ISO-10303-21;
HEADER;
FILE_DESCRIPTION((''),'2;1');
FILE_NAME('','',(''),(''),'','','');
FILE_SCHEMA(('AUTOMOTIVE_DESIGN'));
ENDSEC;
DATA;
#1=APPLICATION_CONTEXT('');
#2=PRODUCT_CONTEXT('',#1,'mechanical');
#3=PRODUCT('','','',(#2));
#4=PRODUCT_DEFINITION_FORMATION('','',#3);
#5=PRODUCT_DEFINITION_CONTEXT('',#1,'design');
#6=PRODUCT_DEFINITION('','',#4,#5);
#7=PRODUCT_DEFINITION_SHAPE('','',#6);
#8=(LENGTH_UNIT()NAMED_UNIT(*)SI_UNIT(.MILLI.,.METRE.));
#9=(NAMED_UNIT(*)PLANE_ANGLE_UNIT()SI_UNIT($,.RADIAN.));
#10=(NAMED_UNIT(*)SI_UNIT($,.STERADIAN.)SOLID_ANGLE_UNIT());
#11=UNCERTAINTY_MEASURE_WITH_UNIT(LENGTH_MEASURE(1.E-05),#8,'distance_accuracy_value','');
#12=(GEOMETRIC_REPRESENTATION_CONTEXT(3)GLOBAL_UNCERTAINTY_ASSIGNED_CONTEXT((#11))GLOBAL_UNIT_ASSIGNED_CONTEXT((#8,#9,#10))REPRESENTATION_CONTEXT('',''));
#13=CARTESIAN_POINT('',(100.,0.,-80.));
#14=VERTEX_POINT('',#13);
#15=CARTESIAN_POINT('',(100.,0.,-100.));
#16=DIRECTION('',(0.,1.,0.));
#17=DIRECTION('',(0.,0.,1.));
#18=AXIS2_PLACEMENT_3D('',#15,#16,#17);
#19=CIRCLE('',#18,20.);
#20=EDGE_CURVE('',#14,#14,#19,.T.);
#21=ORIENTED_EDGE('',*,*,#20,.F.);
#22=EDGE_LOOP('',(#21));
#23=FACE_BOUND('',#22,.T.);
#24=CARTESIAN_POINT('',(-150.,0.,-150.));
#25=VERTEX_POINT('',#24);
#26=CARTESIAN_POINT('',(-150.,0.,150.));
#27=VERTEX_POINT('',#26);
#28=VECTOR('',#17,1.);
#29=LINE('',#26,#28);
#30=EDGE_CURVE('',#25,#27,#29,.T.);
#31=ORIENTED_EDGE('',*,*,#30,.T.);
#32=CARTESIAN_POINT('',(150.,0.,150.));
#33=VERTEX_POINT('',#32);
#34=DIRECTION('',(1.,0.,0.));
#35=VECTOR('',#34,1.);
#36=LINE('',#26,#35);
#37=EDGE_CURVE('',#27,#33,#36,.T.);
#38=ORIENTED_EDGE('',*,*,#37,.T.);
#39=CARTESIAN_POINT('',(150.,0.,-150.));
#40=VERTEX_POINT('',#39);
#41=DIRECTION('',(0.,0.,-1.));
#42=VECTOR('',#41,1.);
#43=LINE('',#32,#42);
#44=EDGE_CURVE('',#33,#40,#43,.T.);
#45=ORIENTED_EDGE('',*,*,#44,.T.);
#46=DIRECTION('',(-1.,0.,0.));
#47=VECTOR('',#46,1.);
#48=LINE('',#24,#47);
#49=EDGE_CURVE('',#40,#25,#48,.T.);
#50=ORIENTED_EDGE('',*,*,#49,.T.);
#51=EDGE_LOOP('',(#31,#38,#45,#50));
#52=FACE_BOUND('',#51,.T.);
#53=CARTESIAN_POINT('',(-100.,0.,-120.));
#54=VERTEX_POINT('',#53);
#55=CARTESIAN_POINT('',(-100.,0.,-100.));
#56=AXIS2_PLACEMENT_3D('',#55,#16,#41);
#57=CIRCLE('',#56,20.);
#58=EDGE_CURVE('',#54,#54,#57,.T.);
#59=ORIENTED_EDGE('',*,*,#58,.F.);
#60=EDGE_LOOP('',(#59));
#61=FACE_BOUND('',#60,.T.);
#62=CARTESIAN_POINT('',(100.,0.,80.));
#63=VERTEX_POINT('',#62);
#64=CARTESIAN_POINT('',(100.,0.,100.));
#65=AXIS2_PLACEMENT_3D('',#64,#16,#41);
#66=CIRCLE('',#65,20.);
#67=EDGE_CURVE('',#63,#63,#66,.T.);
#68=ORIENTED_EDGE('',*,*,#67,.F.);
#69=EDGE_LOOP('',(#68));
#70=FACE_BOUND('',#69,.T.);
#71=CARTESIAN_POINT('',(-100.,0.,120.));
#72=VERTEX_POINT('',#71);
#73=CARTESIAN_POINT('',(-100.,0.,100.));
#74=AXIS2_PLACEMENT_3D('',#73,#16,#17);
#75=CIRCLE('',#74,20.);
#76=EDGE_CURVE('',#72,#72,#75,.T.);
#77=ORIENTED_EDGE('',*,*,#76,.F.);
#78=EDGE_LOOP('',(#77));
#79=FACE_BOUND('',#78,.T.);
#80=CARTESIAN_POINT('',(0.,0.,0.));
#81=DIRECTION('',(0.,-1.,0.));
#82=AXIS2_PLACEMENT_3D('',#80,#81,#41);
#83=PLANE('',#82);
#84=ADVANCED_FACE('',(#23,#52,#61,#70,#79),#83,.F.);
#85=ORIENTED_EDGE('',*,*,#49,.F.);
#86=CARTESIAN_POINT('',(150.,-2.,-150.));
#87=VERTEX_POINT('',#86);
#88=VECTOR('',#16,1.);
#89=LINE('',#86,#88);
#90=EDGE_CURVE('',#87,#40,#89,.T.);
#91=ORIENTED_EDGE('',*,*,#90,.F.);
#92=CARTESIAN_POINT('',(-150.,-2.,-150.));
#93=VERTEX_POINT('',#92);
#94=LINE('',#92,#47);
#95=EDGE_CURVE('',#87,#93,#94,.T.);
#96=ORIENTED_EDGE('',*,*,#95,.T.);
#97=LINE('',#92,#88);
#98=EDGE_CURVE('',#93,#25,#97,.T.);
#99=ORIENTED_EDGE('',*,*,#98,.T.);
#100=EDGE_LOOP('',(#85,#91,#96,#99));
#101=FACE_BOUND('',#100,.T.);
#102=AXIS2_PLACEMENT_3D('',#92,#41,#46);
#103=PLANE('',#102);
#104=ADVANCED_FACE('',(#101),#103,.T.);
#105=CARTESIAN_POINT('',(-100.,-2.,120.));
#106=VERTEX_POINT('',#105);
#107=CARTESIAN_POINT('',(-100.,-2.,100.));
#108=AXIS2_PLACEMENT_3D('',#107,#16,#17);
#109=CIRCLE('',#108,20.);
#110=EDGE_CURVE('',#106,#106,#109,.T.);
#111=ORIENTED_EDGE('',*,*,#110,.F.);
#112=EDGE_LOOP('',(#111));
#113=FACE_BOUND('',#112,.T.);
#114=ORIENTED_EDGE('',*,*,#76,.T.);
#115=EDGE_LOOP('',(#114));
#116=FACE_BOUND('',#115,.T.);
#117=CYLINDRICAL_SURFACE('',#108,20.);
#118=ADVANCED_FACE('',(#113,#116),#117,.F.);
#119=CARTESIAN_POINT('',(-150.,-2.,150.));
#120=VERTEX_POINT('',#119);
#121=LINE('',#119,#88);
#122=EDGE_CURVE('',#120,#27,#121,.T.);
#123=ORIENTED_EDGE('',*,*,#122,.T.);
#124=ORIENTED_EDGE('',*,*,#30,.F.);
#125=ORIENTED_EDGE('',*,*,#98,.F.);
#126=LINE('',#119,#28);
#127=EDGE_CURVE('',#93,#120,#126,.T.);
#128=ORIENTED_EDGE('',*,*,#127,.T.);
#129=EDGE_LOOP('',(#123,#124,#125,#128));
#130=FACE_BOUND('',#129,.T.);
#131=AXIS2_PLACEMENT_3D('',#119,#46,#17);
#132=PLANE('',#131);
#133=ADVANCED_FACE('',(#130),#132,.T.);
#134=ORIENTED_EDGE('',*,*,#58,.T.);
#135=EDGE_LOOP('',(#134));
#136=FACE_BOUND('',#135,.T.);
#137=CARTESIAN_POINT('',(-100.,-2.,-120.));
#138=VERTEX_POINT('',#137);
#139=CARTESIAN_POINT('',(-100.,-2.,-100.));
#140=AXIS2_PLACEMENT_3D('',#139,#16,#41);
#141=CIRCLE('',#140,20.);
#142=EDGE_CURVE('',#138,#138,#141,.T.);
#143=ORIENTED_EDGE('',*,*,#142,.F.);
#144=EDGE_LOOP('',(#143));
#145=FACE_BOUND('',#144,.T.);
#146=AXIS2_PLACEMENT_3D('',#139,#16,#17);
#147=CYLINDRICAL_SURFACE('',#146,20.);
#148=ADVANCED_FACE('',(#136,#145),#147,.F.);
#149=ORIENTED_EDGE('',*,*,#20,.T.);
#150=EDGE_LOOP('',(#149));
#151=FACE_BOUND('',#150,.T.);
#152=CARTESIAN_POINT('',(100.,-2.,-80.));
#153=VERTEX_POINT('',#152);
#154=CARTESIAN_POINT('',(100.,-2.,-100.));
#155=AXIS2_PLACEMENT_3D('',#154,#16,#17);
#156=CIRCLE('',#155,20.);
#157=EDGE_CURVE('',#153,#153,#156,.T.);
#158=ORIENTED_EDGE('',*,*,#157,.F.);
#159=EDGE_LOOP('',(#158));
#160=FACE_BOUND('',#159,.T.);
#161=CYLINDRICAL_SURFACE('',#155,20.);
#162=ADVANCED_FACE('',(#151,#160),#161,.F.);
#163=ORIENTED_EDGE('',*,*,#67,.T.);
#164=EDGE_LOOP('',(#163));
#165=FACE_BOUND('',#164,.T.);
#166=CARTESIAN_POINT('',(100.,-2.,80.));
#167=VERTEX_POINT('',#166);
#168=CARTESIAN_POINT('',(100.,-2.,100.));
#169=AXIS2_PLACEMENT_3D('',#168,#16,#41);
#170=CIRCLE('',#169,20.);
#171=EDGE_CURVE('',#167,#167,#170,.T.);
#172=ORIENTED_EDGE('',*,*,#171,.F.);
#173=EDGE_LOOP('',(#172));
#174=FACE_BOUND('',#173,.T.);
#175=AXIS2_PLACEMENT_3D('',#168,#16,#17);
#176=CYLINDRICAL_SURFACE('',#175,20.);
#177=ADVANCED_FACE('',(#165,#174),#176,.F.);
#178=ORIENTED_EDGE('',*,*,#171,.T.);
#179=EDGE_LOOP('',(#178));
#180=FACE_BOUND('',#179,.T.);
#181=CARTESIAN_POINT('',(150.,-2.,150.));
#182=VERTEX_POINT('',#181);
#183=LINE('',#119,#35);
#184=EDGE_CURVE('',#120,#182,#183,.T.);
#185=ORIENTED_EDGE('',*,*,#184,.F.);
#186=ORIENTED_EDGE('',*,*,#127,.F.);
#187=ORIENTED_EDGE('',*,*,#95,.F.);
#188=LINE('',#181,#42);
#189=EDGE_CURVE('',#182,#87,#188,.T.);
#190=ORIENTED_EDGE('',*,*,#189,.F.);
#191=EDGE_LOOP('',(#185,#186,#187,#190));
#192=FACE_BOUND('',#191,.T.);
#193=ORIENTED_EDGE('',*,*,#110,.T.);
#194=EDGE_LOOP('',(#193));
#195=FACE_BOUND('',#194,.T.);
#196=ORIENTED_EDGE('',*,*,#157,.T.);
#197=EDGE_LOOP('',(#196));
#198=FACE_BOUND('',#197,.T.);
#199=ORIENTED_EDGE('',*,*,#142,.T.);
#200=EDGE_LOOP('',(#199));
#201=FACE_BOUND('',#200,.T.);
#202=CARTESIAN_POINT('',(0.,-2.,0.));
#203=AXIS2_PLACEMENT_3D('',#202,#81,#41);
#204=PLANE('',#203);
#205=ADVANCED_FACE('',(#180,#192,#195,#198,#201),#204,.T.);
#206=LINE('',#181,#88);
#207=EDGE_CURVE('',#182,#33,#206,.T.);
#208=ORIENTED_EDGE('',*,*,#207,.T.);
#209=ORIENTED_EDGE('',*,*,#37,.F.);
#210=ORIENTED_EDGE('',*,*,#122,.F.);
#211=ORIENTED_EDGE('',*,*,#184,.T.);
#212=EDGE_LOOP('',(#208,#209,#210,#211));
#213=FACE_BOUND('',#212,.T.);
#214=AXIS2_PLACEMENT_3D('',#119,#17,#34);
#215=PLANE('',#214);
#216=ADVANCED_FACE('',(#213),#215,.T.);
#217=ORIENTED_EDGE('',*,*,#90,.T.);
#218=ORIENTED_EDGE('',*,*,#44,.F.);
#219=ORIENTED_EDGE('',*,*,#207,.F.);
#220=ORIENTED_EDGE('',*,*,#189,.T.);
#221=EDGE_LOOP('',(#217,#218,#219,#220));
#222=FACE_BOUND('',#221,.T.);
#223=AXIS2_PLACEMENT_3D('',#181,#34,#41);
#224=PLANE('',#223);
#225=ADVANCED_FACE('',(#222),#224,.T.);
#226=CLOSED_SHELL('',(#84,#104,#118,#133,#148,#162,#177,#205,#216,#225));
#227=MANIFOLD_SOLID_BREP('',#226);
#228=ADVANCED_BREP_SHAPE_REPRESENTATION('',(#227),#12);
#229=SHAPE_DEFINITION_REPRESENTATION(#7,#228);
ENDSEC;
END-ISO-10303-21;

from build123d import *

# Parameters (mm, degrees)
SKETCH1_W          = 300
SKETCH1_H          = 300
BASE_FLANGE1_DEPTH = 2
SKETCH6_R          = 20
CUT_EXTRUDE1_DEPTH = 213.141462237


# Sheet-metal steps are written as plain solids
with BuildPart() as part:
    # Sketch1 → Base-Flange1 (new body)
    with BuildSketch(Plane(origin=(0, 0, 0), x_dir=(1, 0, 0), z_dir=(0, 1, 0))):
        Rectangle(SKETCH1_W, SKETCH1_H)
    extrude(amount=-BASE_FLANGE1_DEPTH)

    # Sketch6 → Cut-Extrude1 (cut, through all)
    with BuildSketch(Plane(origin=(0, 0, 0), x_dir=(1, 0, 0), z_dir=(0, 1, 0))):
        with Locations(Location((100, 100, 0), (0, 0, 270))):
            Circle(SKETCH6_R)
        with Locations(Location((100, -100, 0), (0, 0, 90))):
            Circle(SKETCH6_R)
        with Locations(Location((-100, -100, 0), (0, 0, 270))):
            Circle(SKETCH6_R)
        with Locations(Location((-100, 100, 0), (0, 0, 90))):
            Circle(SKETCH6_R)
    extrude(amount=-CUT_EXTRUDE1_DEPTH, mode=Mode.SUBTRACT)


solid = part.part
